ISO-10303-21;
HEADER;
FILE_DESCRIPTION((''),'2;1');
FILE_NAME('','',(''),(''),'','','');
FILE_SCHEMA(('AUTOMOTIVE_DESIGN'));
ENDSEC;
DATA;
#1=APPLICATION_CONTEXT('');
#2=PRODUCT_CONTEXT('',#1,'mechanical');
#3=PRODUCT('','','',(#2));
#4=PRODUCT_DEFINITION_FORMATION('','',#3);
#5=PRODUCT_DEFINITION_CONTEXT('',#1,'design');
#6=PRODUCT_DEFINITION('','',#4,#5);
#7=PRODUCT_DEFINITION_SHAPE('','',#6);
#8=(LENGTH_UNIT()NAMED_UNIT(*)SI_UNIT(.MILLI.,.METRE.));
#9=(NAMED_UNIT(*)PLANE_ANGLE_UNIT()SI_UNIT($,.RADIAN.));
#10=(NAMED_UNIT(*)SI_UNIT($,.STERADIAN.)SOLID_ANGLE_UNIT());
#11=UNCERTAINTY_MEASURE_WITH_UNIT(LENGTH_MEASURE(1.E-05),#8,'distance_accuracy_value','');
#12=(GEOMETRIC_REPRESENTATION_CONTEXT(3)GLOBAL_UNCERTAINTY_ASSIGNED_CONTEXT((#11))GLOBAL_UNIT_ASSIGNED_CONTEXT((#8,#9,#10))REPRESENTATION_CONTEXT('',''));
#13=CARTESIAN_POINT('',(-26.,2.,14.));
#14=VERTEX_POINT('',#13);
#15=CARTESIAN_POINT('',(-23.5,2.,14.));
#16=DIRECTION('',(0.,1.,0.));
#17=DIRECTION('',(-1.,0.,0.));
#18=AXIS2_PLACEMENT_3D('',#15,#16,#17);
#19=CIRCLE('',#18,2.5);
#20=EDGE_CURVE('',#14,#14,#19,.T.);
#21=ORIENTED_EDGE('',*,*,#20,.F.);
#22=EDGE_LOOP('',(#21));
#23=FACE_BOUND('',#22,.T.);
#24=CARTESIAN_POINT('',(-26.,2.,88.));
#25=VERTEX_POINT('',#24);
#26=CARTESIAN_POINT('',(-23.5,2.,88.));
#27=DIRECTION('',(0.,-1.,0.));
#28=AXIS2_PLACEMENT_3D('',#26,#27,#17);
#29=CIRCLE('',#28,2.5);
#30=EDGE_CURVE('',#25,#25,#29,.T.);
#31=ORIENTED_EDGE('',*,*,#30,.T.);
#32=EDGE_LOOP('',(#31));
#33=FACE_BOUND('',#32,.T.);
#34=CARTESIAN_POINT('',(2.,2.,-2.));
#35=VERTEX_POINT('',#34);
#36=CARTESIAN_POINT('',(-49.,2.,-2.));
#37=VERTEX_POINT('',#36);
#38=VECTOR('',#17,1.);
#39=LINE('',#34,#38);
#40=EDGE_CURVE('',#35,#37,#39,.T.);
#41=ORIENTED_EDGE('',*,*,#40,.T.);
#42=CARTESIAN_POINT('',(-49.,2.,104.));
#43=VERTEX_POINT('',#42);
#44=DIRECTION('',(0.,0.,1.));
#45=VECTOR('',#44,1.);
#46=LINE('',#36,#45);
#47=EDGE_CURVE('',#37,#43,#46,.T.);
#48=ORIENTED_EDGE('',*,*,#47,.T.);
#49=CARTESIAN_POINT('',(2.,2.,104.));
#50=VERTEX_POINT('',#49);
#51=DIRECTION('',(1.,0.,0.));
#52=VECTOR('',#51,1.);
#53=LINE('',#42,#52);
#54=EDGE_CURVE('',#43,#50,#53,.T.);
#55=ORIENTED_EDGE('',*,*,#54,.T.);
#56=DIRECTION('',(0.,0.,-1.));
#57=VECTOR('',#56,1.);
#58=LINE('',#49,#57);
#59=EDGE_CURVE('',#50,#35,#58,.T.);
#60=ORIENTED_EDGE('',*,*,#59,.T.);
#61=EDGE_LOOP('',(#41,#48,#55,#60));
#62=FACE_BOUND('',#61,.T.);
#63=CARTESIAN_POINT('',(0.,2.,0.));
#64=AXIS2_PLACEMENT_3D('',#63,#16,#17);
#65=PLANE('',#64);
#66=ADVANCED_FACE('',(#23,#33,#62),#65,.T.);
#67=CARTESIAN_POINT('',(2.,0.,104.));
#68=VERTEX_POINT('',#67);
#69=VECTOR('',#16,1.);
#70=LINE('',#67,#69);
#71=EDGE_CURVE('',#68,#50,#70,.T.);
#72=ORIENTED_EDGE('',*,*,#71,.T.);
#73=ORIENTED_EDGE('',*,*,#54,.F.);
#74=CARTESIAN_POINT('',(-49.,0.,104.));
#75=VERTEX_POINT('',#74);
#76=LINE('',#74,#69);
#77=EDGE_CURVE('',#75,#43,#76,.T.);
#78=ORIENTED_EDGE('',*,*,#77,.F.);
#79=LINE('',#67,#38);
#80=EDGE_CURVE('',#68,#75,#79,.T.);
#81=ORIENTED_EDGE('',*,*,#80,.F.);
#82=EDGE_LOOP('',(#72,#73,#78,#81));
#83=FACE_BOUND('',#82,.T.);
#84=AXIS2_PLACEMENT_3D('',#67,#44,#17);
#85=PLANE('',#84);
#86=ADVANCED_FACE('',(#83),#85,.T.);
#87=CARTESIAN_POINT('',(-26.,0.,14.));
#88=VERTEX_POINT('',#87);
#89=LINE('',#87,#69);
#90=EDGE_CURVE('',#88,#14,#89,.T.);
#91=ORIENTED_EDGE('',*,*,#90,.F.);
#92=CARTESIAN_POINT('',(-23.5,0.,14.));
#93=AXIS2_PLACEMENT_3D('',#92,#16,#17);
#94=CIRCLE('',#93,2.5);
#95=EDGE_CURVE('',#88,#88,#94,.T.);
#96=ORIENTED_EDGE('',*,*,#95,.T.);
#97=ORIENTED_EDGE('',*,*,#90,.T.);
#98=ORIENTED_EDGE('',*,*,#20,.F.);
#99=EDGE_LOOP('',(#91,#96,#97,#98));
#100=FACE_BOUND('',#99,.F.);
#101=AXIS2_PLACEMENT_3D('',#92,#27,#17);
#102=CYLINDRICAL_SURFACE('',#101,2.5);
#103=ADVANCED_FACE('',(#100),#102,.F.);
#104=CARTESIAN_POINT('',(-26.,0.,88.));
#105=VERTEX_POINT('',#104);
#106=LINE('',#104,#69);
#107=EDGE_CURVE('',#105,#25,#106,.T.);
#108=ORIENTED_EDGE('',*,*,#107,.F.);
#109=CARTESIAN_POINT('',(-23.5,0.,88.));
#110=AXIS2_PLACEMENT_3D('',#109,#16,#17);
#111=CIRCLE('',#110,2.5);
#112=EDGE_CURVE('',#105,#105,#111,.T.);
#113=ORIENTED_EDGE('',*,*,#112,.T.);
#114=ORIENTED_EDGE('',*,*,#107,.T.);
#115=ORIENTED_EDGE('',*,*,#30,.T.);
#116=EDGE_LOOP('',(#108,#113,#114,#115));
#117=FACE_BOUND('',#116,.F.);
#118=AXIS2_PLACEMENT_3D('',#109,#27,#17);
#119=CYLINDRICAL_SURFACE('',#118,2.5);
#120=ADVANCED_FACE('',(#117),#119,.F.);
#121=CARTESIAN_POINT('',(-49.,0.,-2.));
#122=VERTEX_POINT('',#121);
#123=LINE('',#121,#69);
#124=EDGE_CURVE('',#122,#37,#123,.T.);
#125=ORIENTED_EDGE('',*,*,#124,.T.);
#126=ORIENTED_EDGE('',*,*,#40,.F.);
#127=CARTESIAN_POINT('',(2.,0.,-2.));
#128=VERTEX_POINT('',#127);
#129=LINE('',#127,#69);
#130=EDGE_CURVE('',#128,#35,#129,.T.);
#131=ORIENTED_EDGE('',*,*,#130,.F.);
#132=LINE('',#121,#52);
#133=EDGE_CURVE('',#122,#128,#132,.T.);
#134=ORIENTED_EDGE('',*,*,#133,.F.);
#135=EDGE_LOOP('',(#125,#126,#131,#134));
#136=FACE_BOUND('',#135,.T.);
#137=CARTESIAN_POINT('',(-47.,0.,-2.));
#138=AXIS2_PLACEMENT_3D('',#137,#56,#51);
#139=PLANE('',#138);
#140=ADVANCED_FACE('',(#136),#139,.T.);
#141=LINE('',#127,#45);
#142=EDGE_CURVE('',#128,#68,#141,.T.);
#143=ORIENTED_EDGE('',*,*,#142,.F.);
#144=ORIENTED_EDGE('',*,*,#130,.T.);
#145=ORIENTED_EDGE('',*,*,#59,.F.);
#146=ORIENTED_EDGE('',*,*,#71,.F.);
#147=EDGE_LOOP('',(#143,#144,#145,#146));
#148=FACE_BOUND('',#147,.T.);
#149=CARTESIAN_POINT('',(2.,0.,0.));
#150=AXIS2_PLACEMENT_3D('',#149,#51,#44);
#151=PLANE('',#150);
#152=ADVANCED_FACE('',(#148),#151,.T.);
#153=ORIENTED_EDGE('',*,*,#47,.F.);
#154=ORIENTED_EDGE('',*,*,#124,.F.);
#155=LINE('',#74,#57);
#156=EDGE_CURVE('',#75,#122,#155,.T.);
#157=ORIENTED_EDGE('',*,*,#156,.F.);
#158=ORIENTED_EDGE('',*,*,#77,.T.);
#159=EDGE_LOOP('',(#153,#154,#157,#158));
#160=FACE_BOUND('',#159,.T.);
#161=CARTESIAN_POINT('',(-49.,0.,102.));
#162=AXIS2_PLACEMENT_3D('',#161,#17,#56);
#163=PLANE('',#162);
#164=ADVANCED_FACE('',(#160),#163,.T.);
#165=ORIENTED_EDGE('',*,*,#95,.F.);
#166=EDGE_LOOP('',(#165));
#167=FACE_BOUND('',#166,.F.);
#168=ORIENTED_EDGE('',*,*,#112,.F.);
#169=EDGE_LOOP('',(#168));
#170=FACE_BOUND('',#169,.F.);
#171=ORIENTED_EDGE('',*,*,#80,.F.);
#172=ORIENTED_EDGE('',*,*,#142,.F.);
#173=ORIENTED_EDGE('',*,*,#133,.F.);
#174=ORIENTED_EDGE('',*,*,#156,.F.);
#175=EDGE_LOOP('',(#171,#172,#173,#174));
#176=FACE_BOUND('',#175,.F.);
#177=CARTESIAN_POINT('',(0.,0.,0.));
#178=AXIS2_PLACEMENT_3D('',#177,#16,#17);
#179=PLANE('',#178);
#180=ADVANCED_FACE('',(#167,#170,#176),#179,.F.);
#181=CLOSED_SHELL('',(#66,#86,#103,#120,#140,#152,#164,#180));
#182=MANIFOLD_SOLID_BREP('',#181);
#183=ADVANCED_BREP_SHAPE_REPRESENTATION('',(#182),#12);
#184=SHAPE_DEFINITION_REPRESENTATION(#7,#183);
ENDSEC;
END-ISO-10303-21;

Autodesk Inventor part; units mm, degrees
ref_plane "YZ Plane" through (0, 0, 0) normal (1, 0, 0) x (0, 1, 0)
ref_plane "XZ Plane" through (0, 0, 0) normal (0, 1, 0) x (-1, 0, 0)
ref_plane "XY Plane" through (0, 0, 0) normal (0, 0, 1) x (1, 0, 0)
sketch "Sketch1" plane through (0, 0, 0) normal (0, 1, 0) x (-1, 0, 0)
  line L0 (0, 0) -> (47, 0)
  line L1 (47, 0) -> (47, 102)
  line L2 (47, 102) -> (0, 102)
  line L3 (0, 102) -> (0, 0)
  line L4 (47, 0) -> (49, 0)
  line L5 (49, 0) -> (49, -2)
  line L6 (49, -2) -> (47, -2)
  line L7 (47, -2) -> (47, 0)
  line L8 (47, 102) -> (49, 102)
  line L9 (49, 102) -> (49, 104)
  line L10 (49, 104) -> (47, 104)
  line L11 (47, 104) -> (47, 102)
  line L12 (0, 102) -> (-2, 102)
  line L13 (-2, 102) -> (-2, 104)
  line L14 (-2, 104) -> (0, 104)
  line L15 (0, 104) -> (0, 102)
  line L16 (0, 0) -> (-2, 0)
  line L17 (-2, 0) -> (-2, -2)
  line L18 (-2, -2) -> (0, -2)
  line L19 (0, -2) -> (0, 0)
  line L20 (47, -2) -> (0, -2)
  line L21 (-2, 0) -> (-2, 102)
  line L22 (0, 104) -> (47, 104)
  line L23 (49, 102) -> (49, 0)
  line L24 (23.5, 102) -> (23.5, 90.5)
  line L25 (23.5, 90.5) -> (23.5, 88)
  circle A0 centre (23.5, 88) radius 2.5
  line L26 (47, 51) -> (0, 51)
  circle A1 centre (23.5, 14) radius 2.5
  dimension "d14" = 47
  dimension "d15" = 102
  dimension "d16" = 2
  dimension "d17" = 2
  dimension "d18" = 2
  dimension "d19" = 2
  dimension "d20" = 2
  dimension "d21" = 2
  dimension "d22" = 2
  dimension "d23" = 2
  dimension "d28" = 11.5
  dimension "d29" = 2.5
sketch "Sketch2" plane through (0, 0, 0) normal (1, 0, 0) x (0, 1, 0)
  point P0 (0, 0)
extrude "Extrusion1" add sketch "Sketch1" along normal blind 2
sketch "Sketch3" plane through (2, 0, 104) normal (1, 0, 0) x (0, 0, -1)
  point P0 (104, 0)
sketch "Sketch4" plane through (2, 0, 104) normal (1, 0, 0) x (0, 0, -1)
  line L0 (106, 0) -> (0, 0) projected
  line L1 (0, 0) -> (2, 0)
  line L2 (2, 0) -> (2, 2)
  line L3 (2, 2) -> (0, 2)
  line L4 (0, 2) -> (0, 0)
  line L5 (2, 0) -> (104, 0)
  line L6 (104, 0) -> (104, -40)
  line L7 (104, -40) -> (2, -40)
  line L8 (2, -40) -> (2, 0)
  line L9 (2, -40) -> (0, -40)
  line L10 (0, -40) -> (0, -42)
  line L11 (0, -42) -> (2, -42)
  line L12 (2, -42) -> (2, -40)
  line L13 (104, -40) -> (106, -40)
  line L14 (106, -40) -> (106, -42)
  line L15 (106, -42) -> (104, -42)
  line L16 (104, -42) -> (104, -40)
  line L17 (104, 0) -> (106, 0)
  line L18 (106, 0) -> (106, 2)
  line L19 (106, 2) -> (104, 2)
  line L20 (104, 2) -> (104, 0)
  line L21 (0, 0) -> (0, -40)
  line L22 (2, -42) -> (104, -42)
  line L23 (106, -40) -> (106, 0)
  line L24 (2, 2) -> (104, 2)
  dimension "d33" = 2
  dimension "d34" = 2
  dimension "d35" = 102
  dimension "d36" = 40
  dimension "d37" = 2
  dimension "d38" = 2
  dimension "d39" = 2
  dimension "d40" = 2
  dimension "d41" = 2
  dimension "d42" = 2
sketch "Sketch5" plane through (0, 0, 0) normal (0, 0, 1) x (1, 0, 0)
  point P0 (0, 0)
equation "\"d14\" = largeur_ins"
equation "\"d15\" = longueur_ins"
equation "\"d16\" = epaisseur"
equation "\"d17\" = epaisseur"
equation "\"d18\" = epaisseur"
equation "\"d19\" = epaisseur"
equation "\"d20\" = epaisseur"
equation "\"d21\" = epaisseur"
equation "\"d22\" = epaisseur"
equation "\"d23\" = epaisseur"
equation "\"d31\" = epaisseur"
equation "\"d33\" = epaisseur"
equation "\"d34\" = epaisseur"
equation "\"d35\" = longueur_ins"
equation "\"d36\" = hauteur_inside"
equation "\"d37\" = epaisseur"
equation "\"d38\" = epaisseur"
equation "\"d39\" = epaisseur"
equation "\"d40\" = epaisseur"
equation "\"d41\" = epaisseur"
equation "\"d42\" = epaisseur"
equation "\"epaisseur\" = 2"
equation "\"largeur_ins\" = 47"
equation "\"longueur_ins\" = 102"
equation "\"dist_laser\" = 69"
equation "\"hauteur_inside\" = 40"
properties part number "boitier_laser"
